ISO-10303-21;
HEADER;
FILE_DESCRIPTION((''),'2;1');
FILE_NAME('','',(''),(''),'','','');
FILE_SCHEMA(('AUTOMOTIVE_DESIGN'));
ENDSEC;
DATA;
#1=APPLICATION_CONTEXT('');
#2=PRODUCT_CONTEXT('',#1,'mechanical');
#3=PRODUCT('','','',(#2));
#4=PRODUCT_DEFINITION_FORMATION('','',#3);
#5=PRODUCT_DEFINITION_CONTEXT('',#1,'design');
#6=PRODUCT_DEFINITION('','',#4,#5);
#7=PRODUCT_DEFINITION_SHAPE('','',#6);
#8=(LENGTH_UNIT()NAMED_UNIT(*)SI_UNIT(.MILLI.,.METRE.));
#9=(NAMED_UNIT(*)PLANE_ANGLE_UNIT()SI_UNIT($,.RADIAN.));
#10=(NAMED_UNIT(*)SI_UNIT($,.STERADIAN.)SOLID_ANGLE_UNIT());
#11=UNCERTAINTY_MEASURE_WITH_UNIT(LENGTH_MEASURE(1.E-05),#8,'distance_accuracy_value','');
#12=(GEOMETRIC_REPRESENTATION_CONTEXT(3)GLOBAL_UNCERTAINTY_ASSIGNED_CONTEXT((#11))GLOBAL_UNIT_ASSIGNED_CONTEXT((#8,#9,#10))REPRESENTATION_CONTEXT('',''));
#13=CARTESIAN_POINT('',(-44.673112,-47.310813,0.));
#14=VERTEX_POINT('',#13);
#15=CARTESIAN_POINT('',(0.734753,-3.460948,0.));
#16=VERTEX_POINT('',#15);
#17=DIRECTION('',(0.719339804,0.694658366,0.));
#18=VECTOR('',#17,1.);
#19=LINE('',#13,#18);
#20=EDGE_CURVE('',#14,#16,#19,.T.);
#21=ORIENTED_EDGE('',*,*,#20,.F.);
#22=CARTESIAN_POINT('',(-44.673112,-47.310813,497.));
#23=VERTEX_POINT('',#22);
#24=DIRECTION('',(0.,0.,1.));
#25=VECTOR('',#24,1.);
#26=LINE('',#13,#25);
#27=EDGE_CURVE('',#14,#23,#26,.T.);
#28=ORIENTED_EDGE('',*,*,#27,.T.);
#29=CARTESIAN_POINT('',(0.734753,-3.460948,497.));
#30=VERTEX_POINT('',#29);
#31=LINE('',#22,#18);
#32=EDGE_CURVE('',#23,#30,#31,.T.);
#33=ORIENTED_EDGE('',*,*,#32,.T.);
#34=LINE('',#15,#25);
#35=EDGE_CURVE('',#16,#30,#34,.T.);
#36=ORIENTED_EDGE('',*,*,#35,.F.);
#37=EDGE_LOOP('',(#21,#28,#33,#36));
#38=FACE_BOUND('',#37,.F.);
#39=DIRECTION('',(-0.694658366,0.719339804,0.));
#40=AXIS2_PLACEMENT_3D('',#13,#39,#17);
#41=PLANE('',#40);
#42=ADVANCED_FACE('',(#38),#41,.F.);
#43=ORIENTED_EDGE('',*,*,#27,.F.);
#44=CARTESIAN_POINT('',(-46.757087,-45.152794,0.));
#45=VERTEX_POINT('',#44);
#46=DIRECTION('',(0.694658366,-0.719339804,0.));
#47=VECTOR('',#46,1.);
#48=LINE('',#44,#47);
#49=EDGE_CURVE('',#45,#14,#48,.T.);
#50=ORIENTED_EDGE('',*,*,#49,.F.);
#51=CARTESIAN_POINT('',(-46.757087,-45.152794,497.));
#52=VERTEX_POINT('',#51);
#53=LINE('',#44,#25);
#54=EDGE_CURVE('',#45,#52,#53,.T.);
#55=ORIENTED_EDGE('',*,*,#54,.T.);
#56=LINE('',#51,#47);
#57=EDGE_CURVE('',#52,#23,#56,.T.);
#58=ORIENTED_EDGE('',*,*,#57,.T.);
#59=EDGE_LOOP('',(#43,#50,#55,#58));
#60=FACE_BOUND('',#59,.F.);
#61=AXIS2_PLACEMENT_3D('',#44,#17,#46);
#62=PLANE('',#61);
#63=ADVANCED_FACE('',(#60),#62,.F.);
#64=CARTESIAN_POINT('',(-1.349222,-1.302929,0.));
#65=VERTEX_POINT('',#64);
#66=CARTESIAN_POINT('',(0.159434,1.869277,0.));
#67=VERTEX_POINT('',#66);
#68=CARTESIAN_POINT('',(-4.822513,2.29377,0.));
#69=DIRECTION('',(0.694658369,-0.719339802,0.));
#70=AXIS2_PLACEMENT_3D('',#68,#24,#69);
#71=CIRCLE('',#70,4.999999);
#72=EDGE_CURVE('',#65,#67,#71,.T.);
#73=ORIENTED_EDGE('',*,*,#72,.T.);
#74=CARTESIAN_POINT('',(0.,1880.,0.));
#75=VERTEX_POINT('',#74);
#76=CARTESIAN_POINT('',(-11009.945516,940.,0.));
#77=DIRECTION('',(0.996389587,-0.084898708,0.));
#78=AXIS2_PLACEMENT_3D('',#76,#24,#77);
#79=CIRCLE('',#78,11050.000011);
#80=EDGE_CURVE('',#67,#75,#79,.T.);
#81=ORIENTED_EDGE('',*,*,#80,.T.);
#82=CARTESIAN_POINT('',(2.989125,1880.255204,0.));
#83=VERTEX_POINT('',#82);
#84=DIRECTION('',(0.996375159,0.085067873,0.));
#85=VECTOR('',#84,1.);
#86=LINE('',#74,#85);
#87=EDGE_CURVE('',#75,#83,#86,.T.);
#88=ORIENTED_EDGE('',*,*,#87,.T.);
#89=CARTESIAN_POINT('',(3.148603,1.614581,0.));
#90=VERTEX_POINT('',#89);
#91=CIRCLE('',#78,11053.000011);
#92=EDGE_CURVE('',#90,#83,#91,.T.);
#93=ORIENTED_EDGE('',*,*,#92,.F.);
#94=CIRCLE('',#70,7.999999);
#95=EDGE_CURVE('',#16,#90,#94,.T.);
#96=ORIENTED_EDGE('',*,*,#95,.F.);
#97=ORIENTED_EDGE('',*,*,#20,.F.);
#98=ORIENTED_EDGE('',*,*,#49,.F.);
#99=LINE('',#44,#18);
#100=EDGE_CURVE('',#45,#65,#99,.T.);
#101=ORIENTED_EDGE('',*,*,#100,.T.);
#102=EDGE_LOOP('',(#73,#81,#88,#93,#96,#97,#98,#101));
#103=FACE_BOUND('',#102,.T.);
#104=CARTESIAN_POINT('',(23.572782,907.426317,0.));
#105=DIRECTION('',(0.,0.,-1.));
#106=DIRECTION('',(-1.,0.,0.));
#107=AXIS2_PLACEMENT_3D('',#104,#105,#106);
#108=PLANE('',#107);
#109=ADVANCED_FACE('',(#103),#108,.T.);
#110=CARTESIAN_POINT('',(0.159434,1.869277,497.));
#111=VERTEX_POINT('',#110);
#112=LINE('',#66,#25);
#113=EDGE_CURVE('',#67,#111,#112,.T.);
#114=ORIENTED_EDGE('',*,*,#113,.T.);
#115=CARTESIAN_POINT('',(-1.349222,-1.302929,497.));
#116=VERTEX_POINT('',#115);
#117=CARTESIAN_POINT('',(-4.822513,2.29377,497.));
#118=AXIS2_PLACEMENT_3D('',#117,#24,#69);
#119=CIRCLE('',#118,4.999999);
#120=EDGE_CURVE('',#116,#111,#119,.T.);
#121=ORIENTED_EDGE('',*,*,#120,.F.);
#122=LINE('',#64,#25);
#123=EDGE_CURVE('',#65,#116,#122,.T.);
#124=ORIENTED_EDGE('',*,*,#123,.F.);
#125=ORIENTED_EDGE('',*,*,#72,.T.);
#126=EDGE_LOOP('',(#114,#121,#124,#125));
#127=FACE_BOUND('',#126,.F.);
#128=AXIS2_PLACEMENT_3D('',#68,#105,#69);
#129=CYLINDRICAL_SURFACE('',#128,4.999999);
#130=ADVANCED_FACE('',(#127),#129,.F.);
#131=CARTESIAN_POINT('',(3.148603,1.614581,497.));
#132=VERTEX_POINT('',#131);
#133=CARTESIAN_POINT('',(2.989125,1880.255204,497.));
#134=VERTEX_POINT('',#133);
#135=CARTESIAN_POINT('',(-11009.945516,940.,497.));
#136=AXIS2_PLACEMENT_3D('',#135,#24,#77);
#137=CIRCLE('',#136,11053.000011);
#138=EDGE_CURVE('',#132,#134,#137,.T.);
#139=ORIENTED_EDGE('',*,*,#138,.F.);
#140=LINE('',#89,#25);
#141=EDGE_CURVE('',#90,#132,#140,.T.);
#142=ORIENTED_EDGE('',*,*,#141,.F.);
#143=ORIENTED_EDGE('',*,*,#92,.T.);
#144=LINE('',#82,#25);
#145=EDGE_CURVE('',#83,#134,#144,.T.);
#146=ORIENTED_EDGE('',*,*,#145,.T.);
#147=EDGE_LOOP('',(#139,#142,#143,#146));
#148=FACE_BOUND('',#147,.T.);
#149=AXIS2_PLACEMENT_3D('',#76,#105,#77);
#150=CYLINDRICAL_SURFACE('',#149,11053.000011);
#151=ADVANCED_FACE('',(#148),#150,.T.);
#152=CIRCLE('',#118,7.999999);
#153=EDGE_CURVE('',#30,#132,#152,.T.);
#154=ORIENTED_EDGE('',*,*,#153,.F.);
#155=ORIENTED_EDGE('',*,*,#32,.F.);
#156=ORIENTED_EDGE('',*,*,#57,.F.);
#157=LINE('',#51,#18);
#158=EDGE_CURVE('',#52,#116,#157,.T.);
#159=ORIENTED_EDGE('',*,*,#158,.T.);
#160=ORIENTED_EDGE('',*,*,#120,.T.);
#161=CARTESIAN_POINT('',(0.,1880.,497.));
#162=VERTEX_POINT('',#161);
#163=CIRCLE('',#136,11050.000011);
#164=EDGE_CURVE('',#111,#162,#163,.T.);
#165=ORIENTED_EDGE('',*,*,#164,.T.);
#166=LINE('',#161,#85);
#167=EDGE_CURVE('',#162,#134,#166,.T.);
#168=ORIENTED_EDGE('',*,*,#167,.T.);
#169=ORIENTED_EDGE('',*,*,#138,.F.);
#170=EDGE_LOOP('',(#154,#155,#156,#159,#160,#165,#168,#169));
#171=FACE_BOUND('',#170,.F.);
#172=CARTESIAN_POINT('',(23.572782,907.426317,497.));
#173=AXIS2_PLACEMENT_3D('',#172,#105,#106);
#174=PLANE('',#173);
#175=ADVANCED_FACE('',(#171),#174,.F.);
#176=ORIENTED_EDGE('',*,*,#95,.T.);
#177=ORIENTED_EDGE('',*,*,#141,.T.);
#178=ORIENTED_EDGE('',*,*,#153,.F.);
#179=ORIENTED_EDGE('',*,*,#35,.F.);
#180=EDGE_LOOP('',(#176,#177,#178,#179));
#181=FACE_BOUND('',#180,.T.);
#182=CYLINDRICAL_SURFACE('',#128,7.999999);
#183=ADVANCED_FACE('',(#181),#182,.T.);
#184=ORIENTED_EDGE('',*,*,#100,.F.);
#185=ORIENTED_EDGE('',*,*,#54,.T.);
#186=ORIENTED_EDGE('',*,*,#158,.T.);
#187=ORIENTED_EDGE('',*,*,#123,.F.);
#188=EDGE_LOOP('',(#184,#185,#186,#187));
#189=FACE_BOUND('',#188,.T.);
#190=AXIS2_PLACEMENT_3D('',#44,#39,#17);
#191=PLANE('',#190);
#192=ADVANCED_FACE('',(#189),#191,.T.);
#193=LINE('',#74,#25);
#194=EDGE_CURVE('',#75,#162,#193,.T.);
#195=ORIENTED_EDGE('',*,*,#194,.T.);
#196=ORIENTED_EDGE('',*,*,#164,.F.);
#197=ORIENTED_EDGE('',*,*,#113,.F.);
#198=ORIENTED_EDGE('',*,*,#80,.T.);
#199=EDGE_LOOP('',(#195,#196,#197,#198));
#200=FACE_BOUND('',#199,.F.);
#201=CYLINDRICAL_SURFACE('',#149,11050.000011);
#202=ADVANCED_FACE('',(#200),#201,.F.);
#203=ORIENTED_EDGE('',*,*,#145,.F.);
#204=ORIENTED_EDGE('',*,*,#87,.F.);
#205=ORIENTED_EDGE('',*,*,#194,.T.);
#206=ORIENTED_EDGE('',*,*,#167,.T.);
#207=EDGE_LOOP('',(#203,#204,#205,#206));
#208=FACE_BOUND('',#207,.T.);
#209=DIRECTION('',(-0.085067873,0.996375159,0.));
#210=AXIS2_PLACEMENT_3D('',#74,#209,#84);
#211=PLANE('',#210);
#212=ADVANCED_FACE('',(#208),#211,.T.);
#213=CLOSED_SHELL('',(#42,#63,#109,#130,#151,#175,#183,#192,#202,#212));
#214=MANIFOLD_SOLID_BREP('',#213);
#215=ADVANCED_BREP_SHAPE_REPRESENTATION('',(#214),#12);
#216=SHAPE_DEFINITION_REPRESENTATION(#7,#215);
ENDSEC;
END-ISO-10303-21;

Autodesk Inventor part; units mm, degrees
ref_plane "YZ Plane" through (0, 0, 0) normal (1, 0, 0) x (0, 1, 0)
ref_plane "XZ Plane" through (0, 0, 0) normal (0, 1, 0) x (-1, 0, 0)
ref_plane "XY Plane" through (0, 0, 0) normal (0, 0, 1) x (1, 0, 0)
sketch "Sketch1" plane through (0, 0, 0) normal (0, 0, 1) x (1, 0, 0)
  arc A0 (0, 0) -> (0.159434, 1.869277) centre (-11009.945504, 940) ccw construction
  arc A1 (-1.349222, -1.302929) -> (0.159434, 1.869277) centre (-4.822514, 2.29377) ccw
  line L0 (-41.190716, -50.91694) -> (-46.757087, -45.152794) construction
  line L1 (-46.757087, -45.152794) -> (-1.349222, -1.302929)
  arc A2 (0.159434, 1.869277) -> (0, 1880) centre (-11009.945504, 940) ccw
  line L2 (-1.349222, -1.302929) -> (0, 0) construction
  line L3 (0, 0) -> (0, 1880) construction
  line L4 (0, 0) -> (1.875639, 0) construction
  dimension "d148" = 5
  dimension "d153" = 65
  dimension "d165" = 11050
  dimension "d167" = 136
  dimension "d168" = 1880
contour flange "Contour Flange2" sketch "Sketch1" thickness 3 bend radius 5 width 497 along (0, 0, 1) mid plane no both sides no wall seen from (-24.053155, -23.227861, 0) lies toward (0.6946584, -0.7193398, 0) curves L1 A1 A2
bend "Bend2"
corner "Corner2"
sketch "Sketch4" plane through (-1.349222, -1.302929, 497) normal (-0.6946584, 0.7193398, 0) x (0.7193398, 0.6946584, 0)
  line L0 (-81.994451, 7.589283) -> (-81.994451, 144.595466) construction
  line L1 (-81.994451, 144.595466) -> (-67.034181, 144.595466) construction
  line L2 (-67.034181, 144.595466) -> (-67.034181, 7.589283) construction
  line L3 (-67.034181, 7.589283) -> (-81.994451, 7.589283) construction
  point P0 (1.875639, 497)
feature "Mark3" [suppressed]
equation "\"d36\" = Thickness"
equation "\"d37\" = BendReliefWidth"
equation "\"d38\" = BendReliefDepth"
equation "\"d39\" = MinimumRemnant"
equation "\"d40\" = TransitionRadius"
equation "\"d42\" = BendRadius"
equation "\"d44\" = CornerReliefSize"
equation "\"d45\" = GapSize"
equation "\"d46\" = JacobiRadiusSize"
equation "\"BendReliefWidth\" = Thickness"
equation "\"BendReliefDepth\" = 0.5 * Thickness"
equation "\"CornerReliefSize\" = 4 * Thickness"
equation "\"MinimumRemnant\" = 2 * Thickness"
equation "\"GapSize\" = Thickness"
equation "\"Thickness\" = 3"
equation "\"TransitionRadius\" = 5"
equation "\"BendRadius\" = 5"
equation "\"JacobiRadiusSize\" = 5"
properties part number "MSC 301 sheet left-right board hip" material "Stainless Steel AISI 304"
